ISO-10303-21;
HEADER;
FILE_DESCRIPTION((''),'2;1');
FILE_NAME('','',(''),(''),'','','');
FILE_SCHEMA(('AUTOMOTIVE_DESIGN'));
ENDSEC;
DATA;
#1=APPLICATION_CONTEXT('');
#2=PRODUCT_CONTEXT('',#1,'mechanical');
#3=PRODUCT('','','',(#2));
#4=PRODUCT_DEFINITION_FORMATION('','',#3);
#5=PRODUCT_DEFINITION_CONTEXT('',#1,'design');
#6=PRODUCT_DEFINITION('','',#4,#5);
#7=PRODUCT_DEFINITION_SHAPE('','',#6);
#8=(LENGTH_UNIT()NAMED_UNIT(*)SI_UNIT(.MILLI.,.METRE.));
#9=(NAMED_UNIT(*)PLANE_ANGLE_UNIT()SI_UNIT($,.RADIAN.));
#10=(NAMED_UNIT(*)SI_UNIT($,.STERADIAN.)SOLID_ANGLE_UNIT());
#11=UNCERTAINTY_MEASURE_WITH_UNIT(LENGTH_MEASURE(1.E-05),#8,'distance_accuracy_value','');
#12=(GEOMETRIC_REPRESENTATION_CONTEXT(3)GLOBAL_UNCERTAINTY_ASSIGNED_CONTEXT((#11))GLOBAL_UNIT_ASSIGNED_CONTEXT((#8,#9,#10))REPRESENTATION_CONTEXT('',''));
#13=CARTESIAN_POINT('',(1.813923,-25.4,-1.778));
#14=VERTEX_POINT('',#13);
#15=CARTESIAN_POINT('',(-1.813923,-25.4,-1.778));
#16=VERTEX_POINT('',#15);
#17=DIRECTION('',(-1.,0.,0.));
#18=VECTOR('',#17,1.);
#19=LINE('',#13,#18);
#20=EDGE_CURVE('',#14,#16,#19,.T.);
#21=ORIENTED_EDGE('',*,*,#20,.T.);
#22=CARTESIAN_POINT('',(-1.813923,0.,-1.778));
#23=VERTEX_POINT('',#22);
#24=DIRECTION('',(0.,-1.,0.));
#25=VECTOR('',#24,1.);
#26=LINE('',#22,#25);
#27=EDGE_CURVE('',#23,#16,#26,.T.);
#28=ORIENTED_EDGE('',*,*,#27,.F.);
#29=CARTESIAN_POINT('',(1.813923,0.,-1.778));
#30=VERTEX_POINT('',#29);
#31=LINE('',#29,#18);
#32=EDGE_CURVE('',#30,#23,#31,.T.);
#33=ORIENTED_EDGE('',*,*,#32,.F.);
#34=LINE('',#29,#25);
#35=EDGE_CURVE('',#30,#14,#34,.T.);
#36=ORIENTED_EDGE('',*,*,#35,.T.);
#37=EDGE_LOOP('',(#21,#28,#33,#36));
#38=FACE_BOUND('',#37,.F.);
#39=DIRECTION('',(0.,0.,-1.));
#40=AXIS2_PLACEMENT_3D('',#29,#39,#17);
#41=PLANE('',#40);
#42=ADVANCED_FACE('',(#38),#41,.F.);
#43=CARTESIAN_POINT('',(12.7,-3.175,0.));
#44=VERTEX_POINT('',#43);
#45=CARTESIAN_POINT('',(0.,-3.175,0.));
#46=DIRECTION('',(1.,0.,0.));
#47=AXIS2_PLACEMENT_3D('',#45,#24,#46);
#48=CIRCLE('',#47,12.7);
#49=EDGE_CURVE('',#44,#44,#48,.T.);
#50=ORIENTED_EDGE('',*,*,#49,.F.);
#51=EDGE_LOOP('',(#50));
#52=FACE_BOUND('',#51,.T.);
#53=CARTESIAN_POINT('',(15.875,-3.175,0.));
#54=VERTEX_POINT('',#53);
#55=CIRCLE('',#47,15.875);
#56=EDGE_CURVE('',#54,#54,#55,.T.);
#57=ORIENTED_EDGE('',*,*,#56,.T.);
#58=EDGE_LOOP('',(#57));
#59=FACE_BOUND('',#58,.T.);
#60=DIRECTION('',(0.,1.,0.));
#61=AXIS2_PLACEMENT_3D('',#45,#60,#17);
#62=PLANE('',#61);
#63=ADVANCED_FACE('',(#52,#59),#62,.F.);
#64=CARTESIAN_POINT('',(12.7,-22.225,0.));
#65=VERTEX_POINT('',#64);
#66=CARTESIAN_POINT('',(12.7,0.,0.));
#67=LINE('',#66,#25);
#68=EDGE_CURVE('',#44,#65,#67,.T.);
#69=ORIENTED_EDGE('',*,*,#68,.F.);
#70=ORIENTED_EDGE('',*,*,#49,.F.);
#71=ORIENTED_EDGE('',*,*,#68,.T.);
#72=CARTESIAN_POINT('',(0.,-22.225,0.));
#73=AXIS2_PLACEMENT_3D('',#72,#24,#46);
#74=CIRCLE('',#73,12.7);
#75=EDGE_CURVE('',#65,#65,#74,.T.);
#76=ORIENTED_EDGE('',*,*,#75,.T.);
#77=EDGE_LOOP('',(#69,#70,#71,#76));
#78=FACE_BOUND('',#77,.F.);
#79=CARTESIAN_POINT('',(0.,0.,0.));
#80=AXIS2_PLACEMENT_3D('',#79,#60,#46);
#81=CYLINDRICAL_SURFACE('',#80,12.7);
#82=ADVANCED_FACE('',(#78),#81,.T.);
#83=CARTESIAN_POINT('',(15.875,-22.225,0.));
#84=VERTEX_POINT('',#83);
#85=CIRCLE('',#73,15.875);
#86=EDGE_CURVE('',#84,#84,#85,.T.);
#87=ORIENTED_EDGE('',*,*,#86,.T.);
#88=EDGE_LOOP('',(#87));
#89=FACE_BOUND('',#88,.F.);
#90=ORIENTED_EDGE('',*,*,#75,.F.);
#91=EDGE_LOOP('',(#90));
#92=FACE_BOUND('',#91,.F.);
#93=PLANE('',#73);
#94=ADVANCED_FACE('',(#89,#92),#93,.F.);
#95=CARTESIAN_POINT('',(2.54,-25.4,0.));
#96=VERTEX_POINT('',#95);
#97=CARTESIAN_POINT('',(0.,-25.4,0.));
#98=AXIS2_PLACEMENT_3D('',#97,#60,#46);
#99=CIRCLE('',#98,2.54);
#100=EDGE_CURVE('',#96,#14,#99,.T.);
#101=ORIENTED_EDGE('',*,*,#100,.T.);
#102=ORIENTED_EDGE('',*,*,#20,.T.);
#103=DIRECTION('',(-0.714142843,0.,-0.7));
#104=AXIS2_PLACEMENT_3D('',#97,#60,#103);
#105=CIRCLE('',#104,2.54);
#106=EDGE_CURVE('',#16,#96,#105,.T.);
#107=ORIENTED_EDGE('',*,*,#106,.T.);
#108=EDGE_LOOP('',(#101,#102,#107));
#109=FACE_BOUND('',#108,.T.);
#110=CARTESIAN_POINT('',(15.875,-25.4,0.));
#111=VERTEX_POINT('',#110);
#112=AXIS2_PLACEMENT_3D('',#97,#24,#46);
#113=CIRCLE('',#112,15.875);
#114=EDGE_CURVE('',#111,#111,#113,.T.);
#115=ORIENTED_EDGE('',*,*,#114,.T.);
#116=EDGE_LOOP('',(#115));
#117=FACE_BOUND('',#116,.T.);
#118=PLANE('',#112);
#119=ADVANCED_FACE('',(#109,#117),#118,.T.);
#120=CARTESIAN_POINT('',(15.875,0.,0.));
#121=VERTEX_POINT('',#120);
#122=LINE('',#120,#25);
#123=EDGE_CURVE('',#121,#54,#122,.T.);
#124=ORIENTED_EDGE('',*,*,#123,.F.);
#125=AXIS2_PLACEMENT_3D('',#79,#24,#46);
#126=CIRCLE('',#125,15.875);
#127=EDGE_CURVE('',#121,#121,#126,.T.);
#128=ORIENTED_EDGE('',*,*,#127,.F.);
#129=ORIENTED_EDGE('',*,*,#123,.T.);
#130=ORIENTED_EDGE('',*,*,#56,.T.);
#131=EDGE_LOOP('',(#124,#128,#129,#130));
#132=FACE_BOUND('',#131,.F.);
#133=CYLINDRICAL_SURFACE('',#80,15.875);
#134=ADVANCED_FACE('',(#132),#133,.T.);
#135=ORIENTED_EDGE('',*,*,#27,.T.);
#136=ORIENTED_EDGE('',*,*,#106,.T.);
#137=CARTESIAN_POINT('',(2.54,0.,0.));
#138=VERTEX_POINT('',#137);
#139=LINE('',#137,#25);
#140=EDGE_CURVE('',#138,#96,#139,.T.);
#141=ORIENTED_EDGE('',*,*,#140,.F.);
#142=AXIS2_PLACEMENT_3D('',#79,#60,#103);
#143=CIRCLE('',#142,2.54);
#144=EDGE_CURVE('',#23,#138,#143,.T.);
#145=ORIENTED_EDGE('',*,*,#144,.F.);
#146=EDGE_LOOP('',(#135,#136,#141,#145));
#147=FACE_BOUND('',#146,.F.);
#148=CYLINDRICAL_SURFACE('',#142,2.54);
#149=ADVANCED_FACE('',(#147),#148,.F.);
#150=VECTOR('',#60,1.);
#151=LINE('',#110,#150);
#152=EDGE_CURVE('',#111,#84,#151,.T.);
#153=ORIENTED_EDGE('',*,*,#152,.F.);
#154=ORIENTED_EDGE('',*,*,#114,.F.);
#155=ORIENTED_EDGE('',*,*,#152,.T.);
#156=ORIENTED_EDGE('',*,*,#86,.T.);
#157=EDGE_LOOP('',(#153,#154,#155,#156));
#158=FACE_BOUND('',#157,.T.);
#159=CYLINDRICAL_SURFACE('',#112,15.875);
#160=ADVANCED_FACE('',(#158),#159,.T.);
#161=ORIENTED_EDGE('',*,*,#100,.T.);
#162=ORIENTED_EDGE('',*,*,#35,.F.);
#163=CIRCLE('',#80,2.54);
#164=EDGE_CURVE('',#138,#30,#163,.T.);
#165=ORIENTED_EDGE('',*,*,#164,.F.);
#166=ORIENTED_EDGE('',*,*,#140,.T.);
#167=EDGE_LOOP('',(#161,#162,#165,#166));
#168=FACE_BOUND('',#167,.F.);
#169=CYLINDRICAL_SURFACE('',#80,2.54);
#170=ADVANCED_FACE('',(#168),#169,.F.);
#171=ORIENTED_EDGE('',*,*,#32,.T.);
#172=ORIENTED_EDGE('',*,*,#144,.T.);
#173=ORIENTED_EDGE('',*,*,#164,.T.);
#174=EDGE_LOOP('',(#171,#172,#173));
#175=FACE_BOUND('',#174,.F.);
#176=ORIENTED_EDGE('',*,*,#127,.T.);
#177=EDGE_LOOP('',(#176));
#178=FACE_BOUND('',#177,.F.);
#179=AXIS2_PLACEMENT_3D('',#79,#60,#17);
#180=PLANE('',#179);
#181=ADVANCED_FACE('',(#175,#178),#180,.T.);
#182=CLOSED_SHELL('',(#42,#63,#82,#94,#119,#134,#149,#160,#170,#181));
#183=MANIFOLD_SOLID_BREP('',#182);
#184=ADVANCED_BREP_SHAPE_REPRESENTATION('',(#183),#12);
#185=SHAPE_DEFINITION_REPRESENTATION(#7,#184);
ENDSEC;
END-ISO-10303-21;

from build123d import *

# Parameters (mm, degrees)
F0_R     = 12.7
F1_DEPTH = 25.4
F2_R     = 15.875
F2_R_2   = 12.7
F3_DEPTH = 3.175


with BuildPart() as f1:
    # F0 (on Front) → F1 (new body)
    with BuildSketch(Plane.XZ):
        Circle(F0_R)
        with BuildLine():
            ThreePointArc((-1.8139228208, -1.778), (-0.9602697629, 2.351485059), (2.54, 0))
            ThreePointArc((2.54, 0), (2.351485059, -0.9602697629), (1.8139228208, -1.778))
            ThreePointArc((1.8139228208, -1.778), (0, -2.54), (-1.8139228208, -1.778))
        make_face(mode=Mode.SUBTRACT)
        with BuildLine():
            Line((1.8139228208, -1.778), (-1.8139228208, -1.778))
            ThreePointArc((-1.8139228208, -1.778), (0, -2.54), (1.8139228208, -1.778))
        make_face()
    extrude(amount=F1_DEPTH)

    # F2 (on face) → F3 (join)
    with BuildSketch(Plane.XZ.offset(25.4)):
        Circle(F2_R)
        Circle(F2_R_2, mode=Mode.SUBTRACT)
    extrude(amount=-F3_DEPTH)

    # F5: F1 across plane


with BuildPart() as f1_1:
    add(f1.part)
    add(f1.part.mirror(Plane(origin=(0, -12.7, -0.0066463366), x_dir=(1, 0, 0), z_dir=(0, 1, 0))))


solid = f1_1.part
